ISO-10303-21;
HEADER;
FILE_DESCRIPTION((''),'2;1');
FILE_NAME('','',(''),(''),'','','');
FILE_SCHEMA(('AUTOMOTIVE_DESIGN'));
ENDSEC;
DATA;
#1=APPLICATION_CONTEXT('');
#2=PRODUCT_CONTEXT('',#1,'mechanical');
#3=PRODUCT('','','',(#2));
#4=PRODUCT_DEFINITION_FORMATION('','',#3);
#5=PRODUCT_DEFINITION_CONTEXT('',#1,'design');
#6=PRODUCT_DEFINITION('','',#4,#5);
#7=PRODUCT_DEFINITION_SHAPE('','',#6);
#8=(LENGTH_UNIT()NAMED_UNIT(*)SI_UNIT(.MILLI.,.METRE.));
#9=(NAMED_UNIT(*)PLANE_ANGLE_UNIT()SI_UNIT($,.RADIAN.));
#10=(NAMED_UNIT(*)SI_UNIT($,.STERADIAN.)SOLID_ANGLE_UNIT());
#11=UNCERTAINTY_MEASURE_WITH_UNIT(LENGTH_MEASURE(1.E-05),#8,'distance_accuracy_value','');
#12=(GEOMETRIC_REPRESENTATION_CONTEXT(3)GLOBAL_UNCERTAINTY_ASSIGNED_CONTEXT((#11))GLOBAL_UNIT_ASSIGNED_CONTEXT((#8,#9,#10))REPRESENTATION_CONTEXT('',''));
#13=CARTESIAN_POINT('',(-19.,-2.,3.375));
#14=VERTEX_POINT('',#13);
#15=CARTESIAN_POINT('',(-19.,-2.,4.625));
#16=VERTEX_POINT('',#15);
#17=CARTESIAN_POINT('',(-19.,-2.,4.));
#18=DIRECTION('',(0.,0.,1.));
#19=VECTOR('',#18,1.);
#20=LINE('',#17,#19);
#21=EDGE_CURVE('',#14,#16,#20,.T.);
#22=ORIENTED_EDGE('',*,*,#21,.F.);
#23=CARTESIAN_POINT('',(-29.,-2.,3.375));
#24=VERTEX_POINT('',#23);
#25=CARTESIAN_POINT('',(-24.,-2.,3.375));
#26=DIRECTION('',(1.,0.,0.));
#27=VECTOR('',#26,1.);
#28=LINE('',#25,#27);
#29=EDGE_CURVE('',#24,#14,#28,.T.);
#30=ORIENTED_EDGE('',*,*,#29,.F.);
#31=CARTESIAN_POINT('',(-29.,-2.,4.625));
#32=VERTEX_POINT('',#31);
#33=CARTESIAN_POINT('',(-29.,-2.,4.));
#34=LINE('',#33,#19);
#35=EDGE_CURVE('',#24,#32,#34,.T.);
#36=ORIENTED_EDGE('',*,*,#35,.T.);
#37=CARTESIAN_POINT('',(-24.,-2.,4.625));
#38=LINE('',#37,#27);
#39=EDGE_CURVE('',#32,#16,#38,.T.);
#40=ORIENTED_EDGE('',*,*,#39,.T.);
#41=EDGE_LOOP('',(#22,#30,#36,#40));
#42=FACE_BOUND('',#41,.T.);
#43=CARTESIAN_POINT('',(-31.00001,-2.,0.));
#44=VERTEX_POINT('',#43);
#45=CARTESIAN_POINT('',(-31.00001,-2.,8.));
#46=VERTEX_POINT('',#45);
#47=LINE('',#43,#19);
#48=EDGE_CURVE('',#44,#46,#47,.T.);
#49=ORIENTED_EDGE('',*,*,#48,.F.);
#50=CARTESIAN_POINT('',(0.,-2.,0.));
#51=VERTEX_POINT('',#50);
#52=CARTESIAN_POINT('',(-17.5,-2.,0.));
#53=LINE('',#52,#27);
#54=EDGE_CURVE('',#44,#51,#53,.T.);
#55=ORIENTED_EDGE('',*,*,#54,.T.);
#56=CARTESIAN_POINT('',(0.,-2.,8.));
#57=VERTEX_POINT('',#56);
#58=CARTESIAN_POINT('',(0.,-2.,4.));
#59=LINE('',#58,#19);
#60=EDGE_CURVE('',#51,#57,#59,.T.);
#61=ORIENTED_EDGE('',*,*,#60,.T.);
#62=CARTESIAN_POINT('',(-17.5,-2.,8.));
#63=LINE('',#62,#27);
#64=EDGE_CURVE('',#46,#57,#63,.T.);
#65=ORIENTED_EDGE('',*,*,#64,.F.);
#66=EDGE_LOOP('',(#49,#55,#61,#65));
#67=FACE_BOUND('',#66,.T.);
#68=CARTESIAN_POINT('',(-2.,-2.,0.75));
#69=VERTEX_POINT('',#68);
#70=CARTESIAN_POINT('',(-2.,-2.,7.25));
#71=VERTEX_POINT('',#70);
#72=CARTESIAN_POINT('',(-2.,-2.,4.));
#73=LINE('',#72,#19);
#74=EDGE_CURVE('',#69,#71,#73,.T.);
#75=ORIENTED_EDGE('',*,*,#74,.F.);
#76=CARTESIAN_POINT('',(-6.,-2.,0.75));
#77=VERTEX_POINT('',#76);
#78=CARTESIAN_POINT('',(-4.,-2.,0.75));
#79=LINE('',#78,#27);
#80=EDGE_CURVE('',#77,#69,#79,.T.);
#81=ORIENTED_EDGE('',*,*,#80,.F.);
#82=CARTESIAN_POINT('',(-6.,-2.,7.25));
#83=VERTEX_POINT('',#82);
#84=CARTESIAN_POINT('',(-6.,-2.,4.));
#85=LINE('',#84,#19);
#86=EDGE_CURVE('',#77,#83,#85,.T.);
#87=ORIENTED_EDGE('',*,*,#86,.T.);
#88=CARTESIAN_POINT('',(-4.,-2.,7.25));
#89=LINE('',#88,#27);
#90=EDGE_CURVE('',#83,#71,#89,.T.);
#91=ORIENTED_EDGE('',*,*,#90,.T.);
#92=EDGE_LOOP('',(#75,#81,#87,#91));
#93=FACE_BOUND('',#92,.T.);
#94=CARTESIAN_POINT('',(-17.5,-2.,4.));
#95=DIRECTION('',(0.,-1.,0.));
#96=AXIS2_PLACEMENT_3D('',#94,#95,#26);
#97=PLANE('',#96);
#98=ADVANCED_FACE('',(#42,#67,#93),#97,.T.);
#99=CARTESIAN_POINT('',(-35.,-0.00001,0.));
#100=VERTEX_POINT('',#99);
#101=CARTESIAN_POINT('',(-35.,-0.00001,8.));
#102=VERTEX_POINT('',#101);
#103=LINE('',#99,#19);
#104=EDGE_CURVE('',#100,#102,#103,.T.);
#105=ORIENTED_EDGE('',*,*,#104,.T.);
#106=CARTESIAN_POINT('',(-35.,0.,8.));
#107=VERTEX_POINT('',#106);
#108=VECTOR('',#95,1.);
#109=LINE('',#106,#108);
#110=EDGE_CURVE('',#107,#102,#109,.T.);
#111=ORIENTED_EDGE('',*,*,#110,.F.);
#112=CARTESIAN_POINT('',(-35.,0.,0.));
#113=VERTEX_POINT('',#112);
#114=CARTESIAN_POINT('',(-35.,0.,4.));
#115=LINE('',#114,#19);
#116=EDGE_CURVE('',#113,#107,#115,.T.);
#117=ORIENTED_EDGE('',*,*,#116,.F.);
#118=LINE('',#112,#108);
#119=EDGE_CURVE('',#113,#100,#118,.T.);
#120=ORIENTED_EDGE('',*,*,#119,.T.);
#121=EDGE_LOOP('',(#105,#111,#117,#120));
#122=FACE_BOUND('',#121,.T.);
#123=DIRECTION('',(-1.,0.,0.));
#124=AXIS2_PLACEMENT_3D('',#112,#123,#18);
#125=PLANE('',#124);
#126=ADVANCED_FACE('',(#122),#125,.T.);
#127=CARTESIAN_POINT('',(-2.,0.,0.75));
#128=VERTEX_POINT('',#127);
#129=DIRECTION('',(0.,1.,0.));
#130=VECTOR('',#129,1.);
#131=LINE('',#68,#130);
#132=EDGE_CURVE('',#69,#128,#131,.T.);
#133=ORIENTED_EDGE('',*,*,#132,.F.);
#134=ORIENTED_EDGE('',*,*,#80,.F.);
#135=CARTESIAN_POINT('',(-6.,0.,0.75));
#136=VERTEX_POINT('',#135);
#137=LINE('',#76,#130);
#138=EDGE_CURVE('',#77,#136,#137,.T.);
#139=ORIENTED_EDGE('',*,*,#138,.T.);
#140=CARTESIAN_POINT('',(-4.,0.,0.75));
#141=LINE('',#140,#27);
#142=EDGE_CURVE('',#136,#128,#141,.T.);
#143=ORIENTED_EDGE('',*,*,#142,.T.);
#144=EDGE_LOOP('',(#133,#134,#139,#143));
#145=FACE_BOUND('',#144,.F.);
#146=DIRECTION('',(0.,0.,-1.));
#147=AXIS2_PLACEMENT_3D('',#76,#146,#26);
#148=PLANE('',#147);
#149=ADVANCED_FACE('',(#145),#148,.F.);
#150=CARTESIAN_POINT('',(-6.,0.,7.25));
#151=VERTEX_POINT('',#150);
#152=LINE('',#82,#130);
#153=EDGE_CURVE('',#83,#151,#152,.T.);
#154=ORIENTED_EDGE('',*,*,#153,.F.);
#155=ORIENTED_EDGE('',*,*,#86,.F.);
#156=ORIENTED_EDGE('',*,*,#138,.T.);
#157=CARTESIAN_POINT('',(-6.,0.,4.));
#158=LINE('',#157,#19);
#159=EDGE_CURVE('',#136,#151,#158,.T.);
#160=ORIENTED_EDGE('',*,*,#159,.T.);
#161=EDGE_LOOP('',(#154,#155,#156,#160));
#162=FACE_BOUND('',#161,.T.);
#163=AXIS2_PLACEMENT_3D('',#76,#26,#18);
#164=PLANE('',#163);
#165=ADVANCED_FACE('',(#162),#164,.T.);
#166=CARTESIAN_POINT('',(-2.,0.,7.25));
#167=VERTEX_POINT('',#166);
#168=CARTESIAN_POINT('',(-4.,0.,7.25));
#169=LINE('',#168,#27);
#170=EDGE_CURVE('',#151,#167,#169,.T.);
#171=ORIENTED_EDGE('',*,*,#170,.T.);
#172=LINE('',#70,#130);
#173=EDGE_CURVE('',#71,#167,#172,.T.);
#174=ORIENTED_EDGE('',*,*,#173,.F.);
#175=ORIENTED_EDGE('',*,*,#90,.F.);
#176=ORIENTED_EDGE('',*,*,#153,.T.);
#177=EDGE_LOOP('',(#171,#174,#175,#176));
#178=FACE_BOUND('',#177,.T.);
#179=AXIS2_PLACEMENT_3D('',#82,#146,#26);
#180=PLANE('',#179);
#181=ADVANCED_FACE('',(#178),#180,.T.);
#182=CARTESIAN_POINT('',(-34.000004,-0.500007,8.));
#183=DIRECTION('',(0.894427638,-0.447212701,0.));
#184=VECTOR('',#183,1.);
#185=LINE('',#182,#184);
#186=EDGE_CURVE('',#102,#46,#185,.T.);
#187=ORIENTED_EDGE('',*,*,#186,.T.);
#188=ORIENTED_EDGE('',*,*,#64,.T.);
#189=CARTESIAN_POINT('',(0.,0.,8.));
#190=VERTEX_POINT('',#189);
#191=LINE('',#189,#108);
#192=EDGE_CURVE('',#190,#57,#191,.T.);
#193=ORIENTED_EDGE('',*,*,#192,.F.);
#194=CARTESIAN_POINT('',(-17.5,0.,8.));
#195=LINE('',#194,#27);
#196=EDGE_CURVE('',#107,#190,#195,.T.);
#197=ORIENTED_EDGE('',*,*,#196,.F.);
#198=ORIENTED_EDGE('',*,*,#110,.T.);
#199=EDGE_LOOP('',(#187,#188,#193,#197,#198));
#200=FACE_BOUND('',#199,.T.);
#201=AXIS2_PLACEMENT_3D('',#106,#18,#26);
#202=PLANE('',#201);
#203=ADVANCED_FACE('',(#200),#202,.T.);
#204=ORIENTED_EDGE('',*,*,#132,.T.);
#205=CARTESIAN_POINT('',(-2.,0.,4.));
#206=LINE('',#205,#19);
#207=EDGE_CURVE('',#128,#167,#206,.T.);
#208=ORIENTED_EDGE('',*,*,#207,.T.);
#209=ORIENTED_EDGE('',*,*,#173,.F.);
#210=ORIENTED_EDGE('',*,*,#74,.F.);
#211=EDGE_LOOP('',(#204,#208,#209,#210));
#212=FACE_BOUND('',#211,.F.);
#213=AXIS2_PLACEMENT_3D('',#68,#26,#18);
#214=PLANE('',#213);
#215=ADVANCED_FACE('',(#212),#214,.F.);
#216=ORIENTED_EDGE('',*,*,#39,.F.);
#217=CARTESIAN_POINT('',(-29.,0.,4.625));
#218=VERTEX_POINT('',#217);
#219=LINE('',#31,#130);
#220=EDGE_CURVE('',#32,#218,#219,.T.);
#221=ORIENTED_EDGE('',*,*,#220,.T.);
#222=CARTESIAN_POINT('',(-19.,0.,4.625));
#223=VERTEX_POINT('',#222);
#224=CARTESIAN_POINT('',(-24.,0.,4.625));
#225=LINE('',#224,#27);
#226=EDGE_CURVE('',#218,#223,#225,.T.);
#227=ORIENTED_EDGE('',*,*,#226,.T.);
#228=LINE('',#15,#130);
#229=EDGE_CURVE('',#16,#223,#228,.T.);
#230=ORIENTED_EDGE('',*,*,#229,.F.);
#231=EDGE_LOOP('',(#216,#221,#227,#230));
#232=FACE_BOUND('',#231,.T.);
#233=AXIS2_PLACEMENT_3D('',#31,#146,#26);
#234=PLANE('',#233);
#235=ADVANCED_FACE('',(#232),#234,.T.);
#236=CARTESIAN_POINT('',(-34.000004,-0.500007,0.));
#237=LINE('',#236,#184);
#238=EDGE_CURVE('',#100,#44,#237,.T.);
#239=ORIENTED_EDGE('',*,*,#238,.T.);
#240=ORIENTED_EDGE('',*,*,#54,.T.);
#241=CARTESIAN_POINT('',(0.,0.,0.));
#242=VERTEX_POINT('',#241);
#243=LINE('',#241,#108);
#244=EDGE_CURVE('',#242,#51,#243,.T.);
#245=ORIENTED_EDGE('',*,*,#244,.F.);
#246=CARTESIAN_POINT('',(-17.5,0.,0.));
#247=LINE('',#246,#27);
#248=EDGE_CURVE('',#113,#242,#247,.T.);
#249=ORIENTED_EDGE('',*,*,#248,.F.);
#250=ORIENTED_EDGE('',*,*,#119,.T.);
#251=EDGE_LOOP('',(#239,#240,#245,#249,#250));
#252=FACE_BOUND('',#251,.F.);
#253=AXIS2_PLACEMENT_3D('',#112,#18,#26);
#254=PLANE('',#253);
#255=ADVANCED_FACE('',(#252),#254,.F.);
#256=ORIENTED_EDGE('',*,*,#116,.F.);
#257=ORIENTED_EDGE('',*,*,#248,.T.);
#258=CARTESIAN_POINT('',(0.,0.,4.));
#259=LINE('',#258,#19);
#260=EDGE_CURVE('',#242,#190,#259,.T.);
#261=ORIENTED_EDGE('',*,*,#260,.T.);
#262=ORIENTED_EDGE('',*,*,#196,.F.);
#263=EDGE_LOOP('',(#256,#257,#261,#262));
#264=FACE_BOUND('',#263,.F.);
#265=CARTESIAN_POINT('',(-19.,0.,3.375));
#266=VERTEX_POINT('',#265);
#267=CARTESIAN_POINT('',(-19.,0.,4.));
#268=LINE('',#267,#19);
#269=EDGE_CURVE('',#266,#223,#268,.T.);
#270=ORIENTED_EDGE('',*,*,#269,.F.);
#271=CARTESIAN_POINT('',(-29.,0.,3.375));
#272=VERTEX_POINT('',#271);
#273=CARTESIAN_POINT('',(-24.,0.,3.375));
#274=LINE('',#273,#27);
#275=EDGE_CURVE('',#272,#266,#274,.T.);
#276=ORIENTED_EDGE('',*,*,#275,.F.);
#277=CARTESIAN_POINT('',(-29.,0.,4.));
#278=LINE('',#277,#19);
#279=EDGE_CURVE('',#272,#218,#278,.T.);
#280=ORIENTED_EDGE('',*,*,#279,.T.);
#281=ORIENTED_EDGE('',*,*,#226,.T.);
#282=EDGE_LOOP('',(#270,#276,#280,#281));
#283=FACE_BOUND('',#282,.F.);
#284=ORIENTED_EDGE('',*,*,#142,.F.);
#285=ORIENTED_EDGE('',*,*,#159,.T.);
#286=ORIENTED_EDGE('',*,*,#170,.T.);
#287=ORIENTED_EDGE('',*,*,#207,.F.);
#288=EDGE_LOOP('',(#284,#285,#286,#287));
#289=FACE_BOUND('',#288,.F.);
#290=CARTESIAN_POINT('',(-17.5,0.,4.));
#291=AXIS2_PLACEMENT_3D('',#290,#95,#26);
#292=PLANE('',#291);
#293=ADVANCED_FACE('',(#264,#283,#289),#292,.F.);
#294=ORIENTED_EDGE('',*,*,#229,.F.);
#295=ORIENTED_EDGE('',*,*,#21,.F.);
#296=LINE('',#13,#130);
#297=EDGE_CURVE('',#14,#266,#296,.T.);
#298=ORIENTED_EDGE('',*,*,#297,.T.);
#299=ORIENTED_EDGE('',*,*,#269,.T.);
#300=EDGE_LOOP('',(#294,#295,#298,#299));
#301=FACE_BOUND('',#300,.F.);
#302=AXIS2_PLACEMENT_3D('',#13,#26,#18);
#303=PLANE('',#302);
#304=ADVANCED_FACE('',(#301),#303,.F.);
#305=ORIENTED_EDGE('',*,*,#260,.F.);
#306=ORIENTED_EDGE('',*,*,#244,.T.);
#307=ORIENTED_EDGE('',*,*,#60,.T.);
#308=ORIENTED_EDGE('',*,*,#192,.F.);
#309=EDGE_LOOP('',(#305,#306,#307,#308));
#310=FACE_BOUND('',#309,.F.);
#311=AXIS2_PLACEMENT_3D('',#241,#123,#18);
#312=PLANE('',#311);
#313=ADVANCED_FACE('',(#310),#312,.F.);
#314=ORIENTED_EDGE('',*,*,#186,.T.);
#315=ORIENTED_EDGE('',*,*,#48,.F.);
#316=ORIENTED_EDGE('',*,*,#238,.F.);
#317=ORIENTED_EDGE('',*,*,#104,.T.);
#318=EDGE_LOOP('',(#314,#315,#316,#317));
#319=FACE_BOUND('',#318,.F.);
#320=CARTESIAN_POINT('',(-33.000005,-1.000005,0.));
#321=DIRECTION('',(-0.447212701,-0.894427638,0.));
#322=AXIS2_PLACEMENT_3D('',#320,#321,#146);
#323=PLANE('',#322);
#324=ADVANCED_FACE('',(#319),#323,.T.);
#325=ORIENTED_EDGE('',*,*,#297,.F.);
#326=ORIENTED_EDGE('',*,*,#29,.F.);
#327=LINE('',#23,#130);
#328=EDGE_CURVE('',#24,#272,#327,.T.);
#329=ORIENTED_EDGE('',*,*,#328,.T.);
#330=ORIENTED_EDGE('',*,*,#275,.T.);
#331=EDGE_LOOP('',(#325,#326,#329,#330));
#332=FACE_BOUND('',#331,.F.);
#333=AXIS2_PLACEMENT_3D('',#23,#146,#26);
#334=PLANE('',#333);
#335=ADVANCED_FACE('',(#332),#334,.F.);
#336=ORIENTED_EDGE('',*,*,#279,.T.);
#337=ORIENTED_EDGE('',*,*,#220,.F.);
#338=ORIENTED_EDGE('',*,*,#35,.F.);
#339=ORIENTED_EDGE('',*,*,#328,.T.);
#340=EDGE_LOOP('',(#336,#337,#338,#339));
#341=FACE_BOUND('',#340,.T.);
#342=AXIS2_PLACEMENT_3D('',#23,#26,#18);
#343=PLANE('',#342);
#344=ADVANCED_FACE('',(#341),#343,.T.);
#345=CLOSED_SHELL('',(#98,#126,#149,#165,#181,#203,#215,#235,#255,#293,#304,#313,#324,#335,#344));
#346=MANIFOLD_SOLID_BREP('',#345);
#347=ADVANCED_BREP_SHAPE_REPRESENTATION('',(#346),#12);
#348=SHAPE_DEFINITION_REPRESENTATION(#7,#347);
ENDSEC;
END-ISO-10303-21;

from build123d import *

# Parameters (mm, degrees)
F0_W     = 35
F0_H     = 8
F1_DEPTH = 2
F2_SIZE2 = 3.99999
F2_SIZE  = 1.99999
F3_W     = 4
F3_H     = 6.5
F4_DEPTH = 2
F5_W     = 10
F5_H     = 1.25
F6_DEPTH = 2


# Not quite as in the source:
# - a fillet or chamfer is up to 0.001 mm smaller than in the source, because OpenCascade refuses the exact size


with BuildPart() as f1:
    # F0 (on Front) → F1 (new body)
    with BuildSketch(Plane.XZ):
        with Locations((-17.5, 4)):
            Rectangle(F0_W, F0_H)
    extrude(amount=F1_DEPTH)

    # F2 (size 2 and 4 in the source; OpenCascade refuses exactly that, so slightly less here)
    f2_edges = [f1.edges().sort_by_distance(p)[0] for p in [
        (-35, -2, 4),
    ]]
    f2_side = f1.faces().sort_by_distance((-35, -1, 4))[0]
    chamfer(f2_edges, length=F2_SIZE, length2=F2_SIZE2, reference=f2_side)

    # F3 (on face) → F4 (cut)
    with BuildSketch(Plane.XZ.offset(2)):
        with Locations((-4, 4)):
            Rectangle(F3_W, F3_H)
    extrude(amount=-F4_DEPTH, mode=Mode.SUBTRACT)

    # F5 (on face) → F6 (cut)
    with BuildSketch(Plane.XZ.offset(2)):
        with Locations((-24, 4)):
            Rectangle(F5_W, F5_H)
    extrude(amount=-F6_DEPTH, mode=Mode.SUBTRACT)


solid = f1.part
